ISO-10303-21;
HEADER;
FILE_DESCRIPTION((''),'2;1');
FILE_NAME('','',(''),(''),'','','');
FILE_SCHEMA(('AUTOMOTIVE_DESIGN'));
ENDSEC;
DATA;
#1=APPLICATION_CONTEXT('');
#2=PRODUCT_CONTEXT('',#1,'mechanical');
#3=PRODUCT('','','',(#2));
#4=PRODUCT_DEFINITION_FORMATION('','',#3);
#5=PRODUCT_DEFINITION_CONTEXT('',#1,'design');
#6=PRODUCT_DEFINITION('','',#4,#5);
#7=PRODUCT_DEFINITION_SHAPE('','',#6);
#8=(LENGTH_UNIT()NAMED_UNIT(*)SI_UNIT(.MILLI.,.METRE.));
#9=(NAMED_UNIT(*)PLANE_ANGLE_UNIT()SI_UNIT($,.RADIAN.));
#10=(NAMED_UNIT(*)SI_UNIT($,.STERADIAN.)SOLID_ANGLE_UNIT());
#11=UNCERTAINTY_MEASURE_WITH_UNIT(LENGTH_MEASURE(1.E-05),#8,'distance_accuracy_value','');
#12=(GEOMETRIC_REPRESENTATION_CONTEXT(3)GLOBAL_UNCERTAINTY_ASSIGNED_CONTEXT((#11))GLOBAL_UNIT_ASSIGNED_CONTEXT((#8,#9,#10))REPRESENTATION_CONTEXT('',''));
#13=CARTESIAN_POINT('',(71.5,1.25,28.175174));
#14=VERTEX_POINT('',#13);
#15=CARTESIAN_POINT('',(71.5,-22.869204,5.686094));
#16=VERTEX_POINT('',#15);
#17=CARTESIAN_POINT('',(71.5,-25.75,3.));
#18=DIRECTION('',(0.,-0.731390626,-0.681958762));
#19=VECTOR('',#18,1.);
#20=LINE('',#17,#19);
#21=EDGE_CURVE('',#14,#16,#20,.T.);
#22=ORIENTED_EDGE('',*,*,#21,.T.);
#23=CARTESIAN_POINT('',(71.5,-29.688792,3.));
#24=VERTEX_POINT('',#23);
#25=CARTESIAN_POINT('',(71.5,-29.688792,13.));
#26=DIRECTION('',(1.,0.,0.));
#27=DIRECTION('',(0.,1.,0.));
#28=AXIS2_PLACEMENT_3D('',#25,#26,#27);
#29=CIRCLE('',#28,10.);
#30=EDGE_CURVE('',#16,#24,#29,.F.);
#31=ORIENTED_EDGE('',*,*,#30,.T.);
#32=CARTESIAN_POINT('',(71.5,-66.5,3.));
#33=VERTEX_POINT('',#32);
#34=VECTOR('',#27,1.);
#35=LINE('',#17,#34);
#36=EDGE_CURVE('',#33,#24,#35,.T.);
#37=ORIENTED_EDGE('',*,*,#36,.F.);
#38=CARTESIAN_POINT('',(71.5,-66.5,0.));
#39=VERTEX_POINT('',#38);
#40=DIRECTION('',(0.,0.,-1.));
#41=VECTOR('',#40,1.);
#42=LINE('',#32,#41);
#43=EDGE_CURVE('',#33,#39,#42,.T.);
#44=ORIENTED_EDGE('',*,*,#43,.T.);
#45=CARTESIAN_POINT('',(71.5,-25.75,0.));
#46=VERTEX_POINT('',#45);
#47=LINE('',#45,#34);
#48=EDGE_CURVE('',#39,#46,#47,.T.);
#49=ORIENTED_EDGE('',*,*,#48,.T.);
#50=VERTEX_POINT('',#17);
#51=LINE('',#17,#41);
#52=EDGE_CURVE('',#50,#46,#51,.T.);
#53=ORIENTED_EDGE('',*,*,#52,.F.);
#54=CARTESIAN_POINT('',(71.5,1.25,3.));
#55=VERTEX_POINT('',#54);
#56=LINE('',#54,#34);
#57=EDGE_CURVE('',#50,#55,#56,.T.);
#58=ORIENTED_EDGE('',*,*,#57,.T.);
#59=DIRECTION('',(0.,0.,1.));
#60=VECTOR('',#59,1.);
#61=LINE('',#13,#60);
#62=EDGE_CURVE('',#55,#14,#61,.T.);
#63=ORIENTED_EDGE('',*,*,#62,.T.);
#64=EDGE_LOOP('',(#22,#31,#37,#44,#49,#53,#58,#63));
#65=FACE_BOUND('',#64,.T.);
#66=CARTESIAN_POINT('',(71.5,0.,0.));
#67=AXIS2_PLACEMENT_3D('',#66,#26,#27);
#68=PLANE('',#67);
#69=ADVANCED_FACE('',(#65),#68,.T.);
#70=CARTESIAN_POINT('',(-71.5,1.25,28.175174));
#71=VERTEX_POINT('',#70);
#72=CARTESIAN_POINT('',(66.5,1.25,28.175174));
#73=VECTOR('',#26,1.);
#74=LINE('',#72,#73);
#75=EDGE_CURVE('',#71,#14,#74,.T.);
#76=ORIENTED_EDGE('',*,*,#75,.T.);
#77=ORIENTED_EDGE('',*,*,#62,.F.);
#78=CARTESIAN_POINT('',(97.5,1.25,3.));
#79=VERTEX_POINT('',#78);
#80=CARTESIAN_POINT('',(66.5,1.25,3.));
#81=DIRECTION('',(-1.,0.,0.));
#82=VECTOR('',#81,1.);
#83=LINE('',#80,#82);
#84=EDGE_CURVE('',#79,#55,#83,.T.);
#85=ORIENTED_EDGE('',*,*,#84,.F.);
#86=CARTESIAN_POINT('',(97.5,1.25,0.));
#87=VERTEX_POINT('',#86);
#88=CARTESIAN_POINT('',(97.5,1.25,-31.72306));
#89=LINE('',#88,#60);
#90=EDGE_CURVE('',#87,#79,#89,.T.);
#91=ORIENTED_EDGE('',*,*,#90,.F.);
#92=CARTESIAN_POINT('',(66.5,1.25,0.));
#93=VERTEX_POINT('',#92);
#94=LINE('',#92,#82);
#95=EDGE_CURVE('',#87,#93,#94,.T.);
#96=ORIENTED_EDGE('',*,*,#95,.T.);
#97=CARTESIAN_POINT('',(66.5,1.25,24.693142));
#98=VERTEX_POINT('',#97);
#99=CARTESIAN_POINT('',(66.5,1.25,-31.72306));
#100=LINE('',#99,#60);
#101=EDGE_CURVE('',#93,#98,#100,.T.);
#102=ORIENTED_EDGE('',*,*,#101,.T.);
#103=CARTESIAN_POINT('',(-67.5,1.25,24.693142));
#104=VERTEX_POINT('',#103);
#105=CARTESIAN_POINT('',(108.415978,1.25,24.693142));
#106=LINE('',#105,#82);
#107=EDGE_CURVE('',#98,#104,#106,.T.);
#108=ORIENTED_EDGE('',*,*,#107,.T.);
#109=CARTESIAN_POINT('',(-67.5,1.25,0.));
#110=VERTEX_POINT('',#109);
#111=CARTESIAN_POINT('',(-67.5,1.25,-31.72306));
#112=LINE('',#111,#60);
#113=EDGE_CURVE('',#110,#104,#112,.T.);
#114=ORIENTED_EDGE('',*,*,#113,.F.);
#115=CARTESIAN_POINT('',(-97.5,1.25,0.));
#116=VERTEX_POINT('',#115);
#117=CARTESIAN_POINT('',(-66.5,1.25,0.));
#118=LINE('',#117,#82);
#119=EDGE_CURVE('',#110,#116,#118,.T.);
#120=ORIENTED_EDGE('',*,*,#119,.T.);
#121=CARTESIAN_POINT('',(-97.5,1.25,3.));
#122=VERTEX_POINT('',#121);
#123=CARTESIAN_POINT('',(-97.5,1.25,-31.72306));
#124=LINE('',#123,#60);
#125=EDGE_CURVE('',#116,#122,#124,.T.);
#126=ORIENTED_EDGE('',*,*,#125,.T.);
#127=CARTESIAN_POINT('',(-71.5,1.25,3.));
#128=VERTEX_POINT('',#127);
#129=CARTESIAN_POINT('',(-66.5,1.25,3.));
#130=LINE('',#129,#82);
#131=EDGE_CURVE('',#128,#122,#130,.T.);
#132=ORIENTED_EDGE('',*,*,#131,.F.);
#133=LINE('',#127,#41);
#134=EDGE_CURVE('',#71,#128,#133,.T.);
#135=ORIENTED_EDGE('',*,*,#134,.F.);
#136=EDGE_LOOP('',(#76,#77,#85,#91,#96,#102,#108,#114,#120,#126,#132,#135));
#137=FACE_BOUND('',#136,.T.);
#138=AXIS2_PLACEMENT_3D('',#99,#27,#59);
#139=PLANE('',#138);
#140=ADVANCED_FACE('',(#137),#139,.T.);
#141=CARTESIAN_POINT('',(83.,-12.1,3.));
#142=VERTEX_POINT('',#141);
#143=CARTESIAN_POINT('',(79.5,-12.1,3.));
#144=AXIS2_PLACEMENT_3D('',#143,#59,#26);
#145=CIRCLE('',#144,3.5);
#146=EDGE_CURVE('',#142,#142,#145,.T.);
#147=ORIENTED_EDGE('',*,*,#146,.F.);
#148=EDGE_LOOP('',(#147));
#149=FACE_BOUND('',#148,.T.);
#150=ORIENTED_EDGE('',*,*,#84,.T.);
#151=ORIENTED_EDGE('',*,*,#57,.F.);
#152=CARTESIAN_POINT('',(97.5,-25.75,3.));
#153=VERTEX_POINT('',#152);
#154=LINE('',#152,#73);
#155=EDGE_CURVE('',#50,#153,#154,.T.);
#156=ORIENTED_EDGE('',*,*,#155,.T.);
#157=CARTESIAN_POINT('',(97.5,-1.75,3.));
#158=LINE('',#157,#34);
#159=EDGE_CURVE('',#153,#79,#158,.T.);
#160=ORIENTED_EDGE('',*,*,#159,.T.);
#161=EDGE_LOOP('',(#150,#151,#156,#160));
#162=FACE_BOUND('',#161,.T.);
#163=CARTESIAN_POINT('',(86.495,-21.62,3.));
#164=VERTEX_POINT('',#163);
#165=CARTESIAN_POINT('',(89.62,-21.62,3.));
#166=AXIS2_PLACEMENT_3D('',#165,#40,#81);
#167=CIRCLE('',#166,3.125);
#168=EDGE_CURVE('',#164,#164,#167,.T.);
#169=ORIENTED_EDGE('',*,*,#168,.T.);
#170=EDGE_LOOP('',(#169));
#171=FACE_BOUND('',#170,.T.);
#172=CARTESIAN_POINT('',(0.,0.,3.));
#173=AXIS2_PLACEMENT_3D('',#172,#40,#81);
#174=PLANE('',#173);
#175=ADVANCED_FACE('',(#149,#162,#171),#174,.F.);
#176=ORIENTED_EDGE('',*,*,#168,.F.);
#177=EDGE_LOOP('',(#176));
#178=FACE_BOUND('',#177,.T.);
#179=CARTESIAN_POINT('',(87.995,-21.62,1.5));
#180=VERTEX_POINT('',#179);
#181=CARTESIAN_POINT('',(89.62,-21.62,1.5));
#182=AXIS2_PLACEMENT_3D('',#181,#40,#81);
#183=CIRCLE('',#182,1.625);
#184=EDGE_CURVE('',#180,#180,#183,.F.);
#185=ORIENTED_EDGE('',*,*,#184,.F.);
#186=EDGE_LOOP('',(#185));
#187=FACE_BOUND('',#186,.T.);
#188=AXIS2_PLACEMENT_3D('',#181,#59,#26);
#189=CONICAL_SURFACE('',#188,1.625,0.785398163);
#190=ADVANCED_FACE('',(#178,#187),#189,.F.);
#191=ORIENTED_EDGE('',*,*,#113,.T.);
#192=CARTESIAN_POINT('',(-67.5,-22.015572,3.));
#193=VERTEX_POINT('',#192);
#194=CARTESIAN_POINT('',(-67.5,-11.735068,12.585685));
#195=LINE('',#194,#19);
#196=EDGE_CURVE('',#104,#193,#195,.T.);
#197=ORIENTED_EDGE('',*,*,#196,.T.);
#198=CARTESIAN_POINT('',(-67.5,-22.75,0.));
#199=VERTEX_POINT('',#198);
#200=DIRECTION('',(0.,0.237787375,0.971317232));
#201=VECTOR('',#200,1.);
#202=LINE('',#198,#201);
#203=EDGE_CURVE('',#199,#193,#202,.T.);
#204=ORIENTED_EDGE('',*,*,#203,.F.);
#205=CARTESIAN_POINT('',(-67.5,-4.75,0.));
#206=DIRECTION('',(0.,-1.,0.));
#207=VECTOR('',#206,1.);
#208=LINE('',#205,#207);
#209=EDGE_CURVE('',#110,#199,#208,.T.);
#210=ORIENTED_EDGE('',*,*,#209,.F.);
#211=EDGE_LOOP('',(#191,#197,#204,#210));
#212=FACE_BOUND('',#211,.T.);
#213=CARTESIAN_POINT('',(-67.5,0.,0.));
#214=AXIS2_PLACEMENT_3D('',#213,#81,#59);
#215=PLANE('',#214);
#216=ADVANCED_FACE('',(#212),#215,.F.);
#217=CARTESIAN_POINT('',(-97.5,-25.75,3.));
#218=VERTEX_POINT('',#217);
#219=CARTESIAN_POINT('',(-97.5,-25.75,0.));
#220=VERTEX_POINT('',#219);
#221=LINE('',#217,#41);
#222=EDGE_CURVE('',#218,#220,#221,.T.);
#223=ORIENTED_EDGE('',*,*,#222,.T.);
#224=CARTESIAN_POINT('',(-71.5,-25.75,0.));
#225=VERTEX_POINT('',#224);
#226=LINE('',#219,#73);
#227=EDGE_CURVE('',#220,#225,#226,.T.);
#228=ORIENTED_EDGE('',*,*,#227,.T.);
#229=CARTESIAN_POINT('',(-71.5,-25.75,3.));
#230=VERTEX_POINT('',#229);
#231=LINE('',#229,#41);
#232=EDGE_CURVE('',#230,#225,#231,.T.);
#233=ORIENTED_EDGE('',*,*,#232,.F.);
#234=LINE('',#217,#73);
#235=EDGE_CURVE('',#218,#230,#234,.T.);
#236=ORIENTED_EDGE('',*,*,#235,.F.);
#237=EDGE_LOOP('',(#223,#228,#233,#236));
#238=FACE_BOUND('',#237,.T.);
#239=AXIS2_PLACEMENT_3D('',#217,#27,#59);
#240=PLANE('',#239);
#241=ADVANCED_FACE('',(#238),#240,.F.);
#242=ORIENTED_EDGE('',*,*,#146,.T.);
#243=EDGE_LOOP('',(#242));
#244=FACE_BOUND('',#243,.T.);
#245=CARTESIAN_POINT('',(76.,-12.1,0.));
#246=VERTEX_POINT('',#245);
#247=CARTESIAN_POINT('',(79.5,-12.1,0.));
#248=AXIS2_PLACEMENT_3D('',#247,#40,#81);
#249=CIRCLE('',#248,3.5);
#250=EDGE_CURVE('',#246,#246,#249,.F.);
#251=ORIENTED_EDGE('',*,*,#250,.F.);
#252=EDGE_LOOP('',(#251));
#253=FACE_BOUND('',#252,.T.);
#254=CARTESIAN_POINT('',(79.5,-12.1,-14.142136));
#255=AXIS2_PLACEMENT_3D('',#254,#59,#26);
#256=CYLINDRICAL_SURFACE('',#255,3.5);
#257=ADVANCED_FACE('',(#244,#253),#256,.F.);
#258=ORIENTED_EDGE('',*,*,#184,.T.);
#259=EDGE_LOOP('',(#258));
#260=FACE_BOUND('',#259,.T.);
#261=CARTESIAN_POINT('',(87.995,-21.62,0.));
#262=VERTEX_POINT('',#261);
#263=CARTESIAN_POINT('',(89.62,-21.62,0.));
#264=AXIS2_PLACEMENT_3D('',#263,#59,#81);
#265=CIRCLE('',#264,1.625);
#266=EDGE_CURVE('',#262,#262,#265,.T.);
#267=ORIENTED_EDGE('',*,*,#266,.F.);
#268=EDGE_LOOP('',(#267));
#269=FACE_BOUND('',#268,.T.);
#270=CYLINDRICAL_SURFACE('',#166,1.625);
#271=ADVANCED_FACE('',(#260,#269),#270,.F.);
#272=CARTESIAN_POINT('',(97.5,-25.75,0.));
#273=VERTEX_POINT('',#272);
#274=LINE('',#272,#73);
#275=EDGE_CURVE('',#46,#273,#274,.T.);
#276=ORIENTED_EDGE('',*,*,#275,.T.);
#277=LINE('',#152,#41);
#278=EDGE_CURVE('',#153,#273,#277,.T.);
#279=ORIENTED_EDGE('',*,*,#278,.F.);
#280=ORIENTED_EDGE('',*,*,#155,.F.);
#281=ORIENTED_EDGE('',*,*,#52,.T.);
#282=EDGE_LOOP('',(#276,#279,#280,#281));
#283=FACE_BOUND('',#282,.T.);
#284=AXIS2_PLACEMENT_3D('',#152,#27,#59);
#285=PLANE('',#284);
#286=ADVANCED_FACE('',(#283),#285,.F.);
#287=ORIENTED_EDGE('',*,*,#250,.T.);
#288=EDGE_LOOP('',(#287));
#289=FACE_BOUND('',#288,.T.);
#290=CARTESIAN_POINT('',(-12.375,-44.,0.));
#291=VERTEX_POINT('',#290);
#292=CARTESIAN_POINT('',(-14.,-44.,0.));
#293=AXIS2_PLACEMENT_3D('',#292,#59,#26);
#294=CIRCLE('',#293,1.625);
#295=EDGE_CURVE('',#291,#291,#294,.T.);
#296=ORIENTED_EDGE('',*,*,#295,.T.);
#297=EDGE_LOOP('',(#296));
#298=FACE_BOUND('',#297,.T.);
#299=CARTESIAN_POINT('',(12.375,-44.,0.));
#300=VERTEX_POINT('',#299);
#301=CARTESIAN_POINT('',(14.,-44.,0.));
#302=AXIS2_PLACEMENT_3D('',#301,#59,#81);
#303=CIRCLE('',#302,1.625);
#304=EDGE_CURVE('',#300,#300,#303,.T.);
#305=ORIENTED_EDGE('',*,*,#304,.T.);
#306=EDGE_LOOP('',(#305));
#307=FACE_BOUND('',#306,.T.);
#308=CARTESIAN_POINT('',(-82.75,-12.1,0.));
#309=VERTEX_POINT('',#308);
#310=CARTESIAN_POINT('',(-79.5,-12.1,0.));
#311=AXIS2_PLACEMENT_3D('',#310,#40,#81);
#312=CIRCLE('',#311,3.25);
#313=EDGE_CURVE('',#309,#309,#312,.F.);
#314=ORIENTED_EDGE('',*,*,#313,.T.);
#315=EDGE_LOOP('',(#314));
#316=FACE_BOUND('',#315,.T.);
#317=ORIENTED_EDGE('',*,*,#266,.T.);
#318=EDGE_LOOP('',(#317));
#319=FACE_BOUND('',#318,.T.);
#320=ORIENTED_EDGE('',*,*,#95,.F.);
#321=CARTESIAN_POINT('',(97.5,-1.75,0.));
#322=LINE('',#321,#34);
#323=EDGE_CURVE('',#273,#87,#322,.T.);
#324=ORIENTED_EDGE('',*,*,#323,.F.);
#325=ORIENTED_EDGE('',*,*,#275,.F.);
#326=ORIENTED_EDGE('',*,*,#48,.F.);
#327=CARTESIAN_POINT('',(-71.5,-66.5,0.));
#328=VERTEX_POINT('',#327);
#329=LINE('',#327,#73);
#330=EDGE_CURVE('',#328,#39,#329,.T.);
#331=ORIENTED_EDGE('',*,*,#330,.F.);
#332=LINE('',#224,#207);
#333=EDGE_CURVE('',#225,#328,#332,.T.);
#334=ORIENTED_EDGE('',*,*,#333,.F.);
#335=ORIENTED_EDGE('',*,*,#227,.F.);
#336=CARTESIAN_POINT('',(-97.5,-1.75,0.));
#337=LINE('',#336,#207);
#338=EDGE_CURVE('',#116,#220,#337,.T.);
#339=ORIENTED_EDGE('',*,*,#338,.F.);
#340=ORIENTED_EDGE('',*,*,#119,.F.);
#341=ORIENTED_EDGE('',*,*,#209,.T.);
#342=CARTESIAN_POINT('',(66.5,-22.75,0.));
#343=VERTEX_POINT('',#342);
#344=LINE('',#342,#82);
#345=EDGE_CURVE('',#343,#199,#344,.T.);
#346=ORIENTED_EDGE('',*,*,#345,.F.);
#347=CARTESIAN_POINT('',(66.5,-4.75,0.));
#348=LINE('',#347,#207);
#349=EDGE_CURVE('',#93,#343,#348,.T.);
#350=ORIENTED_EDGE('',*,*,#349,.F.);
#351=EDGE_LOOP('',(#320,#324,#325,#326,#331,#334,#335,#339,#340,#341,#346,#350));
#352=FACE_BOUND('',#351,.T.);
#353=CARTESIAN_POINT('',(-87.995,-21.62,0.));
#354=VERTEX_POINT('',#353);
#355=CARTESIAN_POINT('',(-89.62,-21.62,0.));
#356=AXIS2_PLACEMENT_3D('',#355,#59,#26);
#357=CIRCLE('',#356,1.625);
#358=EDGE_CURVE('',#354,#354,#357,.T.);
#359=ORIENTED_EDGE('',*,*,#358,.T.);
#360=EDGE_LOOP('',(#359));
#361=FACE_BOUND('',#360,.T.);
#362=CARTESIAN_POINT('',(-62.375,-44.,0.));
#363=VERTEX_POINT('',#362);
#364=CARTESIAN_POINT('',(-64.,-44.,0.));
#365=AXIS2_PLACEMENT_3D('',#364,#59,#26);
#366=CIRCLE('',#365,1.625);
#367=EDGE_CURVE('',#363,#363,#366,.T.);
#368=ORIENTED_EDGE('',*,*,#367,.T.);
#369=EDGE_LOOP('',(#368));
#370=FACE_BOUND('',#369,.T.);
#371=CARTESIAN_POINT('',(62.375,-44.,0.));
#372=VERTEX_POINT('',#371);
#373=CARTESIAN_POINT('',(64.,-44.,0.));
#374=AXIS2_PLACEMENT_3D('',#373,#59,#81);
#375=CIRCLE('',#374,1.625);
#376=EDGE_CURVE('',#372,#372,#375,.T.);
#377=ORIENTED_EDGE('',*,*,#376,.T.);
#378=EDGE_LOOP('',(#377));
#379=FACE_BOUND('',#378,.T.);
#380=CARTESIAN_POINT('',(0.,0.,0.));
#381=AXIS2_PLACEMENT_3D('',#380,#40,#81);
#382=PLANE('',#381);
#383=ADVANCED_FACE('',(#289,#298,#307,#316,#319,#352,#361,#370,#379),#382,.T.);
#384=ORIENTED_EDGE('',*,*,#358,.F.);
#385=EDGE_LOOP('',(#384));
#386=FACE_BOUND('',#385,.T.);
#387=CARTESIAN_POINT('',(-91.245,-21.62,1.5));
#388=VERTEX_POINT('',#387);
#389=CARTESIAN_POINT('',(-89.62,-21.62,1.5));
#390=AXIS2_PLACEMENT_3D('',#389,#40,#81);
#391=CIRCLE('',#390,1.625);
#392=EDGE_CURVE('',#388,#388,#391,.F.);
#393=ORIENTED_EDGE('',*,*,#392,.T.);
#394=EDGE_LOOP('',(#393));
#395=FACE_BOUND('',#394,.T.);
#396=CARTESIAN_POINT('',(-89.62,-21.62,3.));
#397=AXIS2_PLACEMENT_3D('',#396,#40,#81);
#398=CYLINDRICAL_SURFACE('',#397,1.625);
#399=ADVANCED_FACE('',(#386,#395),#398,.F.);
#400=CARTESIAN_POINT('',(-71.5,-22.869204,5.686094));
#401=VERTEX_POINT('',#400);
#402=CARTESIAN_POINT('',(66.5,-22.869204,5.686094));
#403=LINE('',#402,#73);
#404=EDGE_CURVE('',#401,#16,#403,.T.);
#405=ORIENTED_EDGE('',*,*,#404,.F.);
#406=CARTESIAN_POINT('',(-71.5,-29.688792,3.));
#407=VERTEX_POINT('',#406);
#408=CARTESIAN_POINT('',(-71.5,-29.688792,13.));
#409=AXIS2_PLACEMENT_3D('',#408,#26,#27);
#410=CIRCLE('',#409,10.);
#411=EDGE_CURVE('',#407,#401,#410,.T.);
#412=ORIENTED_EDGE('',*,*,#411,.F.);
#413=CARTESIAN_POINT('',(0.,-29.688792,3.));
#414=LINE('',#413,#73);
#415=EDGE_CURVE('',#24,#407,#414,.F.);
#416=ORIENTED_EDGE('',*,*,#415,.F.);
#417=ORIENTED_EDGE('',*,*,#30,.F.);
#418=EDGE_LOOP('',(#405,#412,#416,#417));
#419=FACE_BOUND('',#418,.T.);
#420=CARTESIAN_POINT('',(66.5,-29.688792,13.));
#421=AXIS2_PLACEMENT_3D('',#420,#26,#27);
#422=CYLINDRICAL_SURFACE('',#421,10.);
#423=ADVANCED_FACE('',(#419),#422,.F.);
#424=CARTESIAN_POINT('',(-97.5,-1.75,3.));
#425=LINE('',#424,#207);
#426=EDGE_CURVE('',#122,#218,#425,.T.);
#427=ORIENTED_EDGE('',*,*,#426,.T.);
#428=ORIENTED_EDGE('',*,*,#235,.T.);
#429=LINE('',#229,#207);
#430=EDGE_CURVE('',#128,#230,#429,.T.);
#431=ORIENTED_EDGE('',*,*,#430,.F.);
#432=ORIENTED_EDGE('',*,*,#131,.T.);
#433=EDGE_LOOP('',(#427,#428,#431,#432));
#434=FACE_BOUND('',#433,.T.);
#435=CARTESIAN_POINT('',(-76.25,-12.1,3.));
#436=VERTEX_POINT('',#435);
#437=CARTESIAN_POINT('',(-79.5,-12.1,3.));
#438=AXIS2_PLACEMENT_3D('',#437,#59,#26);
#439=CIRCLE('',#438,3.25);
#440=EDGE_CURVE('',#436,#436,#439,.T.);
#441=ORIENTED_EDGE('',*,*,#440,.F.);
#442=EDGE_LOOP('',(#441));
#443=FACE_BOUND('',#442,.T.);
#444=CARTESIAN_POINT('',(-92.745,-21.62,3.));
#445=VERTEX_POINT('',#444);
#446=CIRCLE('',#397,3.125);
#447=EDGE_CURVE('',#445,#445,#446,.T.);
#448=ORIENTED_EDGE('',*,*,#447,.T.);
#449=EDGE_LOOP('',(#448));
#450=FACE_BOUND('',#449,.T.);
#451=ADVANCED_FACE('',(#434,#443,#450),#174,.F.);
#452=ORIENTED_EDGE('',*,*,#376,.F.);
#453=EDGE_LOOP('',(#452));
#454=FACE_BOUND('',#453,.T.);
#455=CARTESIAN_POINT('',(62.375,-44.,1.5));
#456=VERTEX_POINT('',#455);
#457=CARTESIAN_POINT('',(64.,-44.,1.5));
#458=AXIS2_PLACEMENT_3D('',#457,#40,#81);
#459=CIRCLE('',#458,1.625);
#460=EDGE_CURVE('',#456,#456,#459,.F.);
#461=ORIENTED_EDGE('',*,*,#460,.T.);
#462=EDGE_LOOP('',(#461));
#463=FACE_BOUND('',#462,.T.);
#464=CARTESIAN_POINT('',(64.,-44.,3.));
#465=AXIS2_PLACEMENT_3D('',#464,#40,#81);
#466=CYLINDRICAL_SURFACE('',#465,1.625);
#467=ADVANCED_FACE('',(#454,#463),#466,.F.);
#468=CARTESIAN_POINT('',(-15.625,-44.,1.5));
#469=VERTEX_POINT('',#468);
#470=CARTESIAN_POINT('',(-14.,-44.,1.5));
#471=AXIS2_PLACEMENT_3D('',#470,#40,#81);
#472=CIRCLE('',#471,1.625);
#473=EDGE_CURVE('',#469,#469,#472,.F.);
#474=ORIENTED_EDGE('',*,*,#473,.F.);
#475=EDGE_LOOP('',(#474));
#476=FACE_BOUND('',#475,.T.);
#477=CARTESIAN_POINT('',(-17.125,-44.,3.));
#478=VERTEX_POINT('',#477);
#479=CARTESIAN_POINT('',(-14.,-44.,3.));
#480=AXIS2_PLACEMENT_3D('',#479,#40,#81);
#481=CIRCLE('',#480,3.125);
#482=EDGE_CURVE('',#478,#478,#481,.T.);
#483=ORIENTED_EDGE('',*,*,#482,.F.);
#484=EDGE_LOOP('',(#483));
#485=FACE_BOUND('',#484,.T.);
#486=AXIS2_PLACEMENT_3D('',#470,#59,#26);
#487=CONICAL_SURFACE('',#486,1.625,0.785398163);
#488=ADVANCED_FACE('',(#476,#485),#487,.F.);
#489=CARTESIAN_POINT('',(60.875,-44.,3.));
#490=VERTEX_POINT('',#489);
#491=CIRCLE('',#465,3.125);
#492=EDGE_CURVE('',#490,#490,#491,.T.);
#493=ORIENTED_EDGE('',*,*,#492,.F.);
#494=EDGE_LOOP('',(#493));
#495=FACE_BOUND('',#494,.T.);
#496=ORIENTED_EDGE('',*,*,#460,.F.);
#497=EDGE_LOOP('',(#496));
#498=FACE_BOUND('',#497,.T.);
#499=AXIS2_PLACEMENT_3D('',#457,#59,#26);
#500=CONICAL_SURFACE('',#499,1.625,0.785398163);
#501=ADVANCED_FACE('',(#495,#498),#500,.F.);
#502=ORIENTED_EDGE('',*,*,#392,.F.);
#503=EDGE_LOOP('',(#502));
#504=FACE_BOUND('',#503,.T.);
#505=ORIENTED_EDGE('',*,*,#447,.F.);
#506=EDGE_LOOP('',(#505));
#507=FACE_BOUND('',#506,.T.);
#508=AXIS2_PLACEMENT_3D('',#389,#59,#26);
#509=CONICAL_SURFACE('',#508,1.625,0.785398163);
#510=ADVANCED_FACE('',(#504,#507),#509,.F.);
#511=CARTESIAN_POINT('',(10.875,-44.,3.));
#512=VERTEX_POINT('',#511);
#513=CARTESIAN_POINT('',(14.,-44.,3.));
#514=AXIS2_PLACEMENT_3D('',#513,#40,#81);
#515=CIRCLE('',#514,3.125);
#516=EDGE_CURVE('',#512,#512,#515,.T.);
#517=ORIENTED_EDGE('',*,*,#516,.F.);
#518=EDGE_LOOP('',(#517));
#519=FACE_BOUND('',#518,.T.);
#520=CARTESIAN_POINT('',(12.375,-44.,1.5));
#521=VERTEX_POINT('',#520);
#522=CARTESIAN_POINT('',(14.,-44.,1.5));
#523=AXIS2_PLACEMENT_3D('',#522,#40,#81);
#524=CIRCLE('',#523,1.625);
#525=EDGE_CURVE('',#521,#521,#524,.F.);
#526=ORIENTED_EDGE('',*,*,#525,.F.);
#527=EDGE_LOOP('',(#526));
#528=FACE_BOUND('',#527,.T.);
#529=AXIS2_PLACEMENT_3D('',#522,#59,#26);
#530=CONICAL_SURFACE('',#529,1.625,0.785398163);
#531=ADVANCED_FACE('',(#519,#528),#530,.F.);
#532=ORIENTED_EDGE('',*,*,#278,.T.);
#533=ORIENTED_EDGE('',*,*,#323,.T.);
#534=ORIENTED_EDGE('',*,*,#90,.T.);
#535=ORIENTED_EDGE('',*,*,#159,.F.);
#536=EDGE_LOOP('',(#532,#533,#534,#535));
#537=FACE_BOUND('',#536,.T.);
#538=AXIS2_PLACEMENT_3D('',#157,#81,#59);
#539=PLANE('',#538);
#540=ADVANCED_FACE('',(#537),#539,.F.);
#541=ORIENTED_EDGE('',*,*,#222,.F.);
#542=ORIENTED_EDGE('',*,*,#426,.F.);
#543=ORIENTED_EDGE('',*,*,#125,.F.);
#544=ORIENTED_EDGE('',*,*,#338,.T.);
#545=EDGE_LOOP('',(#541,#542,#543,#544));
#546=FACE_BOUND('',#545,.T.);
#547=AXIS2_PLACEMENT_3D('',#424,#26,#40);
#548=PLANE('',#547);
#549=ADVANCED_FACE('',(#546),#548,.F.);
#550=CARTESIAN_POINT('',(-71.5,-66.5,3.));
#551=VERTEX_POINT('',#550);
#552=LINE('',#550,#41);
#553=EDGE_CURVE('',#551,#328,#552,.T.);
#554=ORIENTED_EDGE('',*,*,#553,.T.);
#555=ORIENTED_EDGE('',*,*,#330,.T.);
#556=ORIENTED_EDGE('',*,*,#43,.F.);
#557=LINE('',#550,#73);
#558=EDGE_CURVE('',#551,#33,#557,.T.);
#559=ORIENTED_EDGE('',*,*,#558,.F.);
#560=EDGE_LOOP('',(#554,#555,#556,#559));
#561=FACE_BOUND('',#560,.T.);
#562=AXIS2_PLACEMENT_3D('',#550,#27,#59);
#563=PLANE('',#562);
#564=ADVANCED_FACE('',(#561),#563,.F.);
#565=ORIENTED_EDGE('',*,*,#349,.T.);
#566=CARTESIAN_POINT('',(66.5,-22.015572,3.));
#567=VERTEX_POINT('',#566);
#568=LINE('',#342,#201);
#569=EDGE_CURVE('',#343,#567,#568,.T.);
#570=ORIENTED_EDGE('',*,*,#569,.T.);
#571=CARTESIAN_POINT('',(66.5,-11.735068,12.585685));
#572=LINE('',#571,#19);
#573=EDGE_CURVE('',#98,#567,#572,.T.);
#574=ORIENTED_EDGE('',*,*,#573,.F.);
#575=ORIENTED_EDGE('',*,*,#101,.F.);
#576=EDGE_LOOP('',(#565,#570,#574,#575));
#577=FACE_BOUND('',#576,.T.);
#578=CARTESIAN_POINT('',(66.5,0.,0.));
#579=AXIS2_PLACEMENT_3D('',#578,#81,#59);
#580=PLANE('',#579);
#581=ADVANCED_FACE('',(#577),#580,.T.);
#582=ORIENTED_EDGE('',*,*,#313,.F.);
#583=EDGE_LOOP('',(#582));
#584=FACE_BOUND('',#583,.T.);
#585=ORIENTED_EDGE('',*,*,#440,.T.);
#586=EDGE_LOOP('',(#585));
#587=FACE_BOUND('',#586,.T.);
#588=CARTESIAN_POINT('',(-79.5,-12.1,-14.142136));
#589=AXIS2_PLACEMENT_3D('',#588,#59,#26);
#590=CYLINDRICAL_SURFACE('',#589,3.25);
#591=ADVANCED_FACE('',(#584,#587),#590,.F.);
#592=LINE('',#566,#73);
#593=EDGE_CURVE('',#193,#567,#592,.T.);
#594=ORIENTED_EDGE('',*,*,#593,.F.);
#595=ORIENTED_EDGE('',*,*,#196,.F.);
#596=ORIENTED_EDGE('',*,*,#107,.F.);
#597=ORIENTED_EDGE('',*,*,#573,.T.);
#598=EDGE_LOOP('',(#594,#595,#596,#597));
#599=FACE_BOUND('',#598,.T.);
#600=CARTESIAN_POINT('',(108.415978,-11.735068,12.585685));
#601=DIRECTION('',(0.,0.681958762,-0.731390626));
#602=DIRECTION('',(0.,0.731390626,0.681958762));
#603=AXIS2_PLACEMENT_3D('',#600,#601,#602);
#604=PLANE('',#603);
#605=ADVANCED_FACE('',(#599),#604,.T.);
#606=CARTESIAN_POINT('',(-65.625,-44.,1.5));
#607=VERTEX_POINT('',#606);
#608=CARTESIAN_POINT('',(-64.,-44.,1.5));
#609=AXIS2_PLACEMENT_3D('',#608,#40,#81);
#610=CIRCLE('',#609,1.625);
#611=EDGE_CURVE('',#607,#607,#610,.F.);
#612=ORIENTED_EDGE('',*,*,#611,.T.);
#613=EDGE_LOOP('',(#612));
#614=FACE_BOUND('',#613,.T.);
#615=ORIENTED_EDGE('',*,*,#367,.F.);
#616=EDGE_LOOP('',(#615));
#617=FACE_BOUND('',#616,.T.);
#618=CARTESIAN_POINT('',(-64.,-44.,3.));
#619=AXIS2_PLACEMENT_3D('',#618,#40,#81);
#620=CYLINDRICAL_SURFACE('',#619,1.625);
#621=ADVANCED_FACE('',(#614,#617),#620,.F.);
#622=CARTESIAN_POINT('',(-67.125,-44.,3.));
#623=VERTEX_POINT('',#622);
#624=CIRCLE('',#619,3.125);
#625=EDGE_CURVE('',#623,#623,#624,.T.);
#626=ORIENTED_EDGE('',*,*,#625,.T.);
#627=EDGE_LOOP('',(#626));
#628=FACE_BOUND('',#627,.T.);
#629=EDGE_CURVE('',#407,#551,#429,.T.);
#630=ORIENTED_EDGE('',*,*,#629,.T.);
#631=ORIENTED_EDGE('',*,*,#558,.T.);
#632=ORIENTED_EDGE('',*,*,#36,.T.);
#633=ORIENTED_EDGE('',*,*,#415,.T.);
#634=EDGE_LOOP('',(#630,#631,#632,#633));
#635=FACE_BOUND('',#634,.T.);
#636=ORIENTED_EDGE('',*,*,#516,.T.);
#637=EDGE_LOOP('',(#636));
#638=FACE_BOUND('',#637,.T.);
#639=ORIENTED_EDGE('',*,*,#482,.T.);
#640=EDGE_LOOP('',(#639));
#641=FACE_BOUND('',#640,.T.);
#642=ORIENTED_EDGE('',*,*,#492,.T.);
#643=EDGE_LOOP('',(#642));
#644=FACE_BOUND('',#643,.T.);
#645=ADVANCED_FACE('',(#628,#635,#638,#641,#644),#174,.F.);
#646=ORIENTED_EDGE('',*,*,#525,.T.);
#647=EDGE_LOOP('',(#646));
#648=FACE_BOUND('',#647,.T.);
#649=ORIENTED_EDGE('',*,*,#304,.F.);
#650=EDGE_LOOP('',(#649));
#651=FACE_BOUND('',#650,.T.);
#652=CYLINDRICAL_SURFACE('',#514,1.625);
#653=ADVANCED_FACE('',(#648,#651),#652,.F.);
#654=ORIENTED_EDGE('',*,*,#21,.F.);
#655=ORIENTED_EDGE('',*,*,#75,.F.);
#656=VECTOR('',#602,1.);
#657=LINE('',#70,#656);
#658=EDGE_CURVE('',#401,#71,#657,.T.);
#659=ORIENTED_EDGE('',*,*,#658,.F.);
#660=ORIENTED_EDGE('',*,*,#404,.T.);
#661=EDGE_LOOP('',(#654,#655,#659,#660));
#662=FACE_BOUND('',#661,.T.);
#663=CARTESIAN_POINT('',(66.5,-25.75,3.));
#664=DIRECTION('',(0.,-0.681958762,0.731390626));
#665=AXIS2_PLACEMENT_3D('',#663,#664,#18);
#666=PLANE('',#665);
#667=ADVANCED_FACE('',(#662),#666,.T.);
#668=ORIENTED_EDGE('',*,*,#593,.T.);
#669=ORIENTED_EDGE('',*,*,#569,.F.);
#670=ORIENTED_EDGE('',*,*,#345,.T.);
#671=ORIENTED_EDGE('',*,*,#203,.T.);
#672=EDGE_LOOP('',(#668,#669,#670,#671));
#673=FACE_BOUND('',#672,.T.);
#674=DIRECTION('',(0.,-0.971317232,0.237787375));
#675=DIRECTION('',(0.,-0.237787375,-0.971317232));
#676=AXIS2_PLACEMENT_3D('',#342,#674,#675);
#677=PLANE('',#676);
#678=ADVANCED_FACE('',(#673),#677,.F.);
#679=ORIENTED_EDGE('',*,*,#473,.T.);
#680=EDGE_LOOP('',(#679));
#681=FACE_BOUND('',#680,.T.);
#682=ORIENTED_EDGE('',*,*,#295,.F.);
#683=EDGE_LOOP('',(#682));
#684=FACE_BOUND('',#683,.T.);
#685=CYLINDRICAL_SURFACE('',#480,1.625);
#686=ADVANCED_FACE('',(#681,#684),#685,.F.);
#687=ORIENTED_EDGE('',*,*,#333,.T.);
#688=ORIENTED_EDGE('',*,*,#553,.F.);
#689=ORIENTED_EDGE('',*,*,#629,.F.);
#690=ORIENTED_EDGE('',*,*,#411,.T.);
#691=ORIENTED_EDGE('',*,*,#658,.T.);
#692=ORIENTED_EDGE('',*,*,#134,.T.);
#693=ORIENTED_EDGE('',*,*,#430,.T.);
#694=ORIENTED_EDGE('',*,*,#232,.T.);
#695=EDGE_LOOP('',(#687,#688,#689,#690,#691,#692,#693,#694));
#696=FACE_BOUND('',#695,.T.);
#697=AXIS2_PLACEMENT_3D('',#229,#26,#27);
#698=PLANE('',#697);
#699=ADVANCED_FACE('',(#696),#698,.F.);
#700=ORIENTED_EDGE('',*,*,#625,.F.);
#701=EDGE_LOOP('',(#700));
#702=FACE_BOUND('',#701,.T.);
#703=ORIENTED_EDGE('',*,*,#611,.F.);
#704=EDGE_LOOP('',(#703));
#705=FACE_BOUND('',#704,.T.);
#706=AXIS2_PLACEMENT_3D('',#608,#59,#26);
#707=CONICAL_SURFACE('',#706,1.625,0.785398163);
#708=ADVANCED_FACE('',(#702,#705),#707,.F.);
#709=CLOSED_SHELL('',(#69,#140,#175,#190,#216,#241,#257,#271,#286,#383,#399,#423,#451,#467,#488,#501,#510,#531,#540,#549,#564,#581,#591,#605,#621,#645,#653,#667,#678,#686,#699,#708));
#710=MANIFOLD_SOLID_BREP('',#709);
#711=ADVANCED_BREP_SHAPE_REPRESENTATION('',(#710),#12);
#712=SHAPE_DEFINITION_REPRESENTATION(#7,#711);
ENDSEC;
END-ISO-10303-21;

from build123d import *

# Parameters (mm, degrees)
CROQUIS1_R                  = 1.625
SALIENTE_EXTRUIR1_DEPTH     = 3
CROQUIS2_W                  = 143
CROQUIS2_H                  = 24
SALIENTE_EXTRUIR2_DEPTH     = 13
CORTAR_EXTRUIR1_START       = -4
CORTAR_EXTRUIR1_DEPTH       = 134
CORTAR_EXTRUIR2_DEPTH       = 183.316345948
CORTAR_EXTRUIR2_DEPTH_BACK  = 183.316345948
SALIENTE_EXTRUIR3_DEPTH     = 1
CHAFL_N1_SIZE               = 1.5
CROQUIS7_R                  = 6
CORTAR_EXTRUIR3_DEPTH       = 10
CROQUIS11_R                 = 5
CORTAR_EXTRUIR7_DEPTH       = 60
CORTAR_EXTRUIR8_DEPTH       = 183.40682554
CORTAR_EXTRUIR8_DEPTH_BACK  = 183.40682554
CROQUIS12_W                 = 39.754544999
CROQUIS12_H                 = 27.919936099
CORTAR_EXTRUIR9_DEPTH       = 119.057189531
CORTAR_EXTRUIR9_DEPTH_BACK  = 119.057189531
CROQUIS13_W                 = 134.117881028
CROQUIS13_H                 = 3.734427539
CORTAR_EXTRUIR10_DEPTH      = 207.049144623
CORTAR_EXTRUIR10_DEPTH_BACK = 207.049144623
CROQUIS14_W                 = 4.069621889
CROQUIS14_H                 = 4.224509549
CROQUIS22_W                 = 31
CROQUIS22_H                 = 6.734427539
SALIENTE_EXTRUIR9_DEPTH     = 3
CROQUIS23_W                 = 15.138367264
CROQUIS23_H                 = 34.152206442
CORTAR_EXTRUIR11_DEPTH      = 10
SALIENTE_EXTRUIR4_START     = -5
SALIENTE_EXTRUIR4_DEPTH     = 5
SALIENTE_EXTRUIR5_START     = -4
SALIENTE_EXTRUIR5_DEPTH     = 4
SALIENTE_EXTRUIR6_START     = -138
SALIENTE_EXTRUIR6_DEPTH     = 134
CROQUIS18_R                 = 6
SALIENTE_EXTRUIR7_DEPTH     = 3
REDONDEO1_R                 = 10
CROQUIS19_R                 = 5
CROQUIS19_R_2               = 3.25
CROQUIS19_R_3               = 3.5
SALIENTE_EXTRUIR8_DEPTH     = 3


with BuildPart() as part:
    # Croquis1 → Saliente-Extruir1 (new body)
    with BuildSketch(Plane.XY):
        Polygon((-97.5, -1.75), (-97.5, -25.75), (-71.5, -25.75), (-71.5, -66.5), (71.5, -66.5), (71.5, -25.75), (97.5, -25.75), (97.5, -1.75), align=None)
        with Locations((-89.62, -21.62)):
            Circle(CROQUIS1_R, mode=Mode.SUBTRACT)
        with Locations((-64, -44)):
            Circle(CROQUIS1_R, mode=Mode.SUBTRACT)
        with Locations((-14, -44)):
            Circle(CROQUIS1_R, mode=Mode.SUBTRACT)
        with Locations(Location((14, -44, 0), (0, 0, 180))):
            Circle(CROQUIS1_R, mode=Mode.SUBTRACT)
        with Locations(Location((64, -44, 0), (0, 0, 180))):
            Circle(CROQUIS1_R, mode=Mode.SUBTRACT)
        with Locations(Location((89.62, -21.62, 0), (0, 0, 180))):
            Circle(CROQUIS1_R, mode=Mode.SUBTRACT)
    extrude(amount=SALIENTE_EXTRUIR1_DEPTH)

    # Croquis2 → Saliente-Extruir2 (add)
    with BuildSketch(Plane.XY.offset(3)):
        with Locations((0, -13.75)):
            Rectangle(CROQUIS2_W, CROQUIS2_H)
    extrude(amount=SALIENTE_EXTRUIR2_DEPTH)

    # Croquis4 → Cortar-Extruir1 (cut)
    with BuildSketch(Plane.ZY.offset(71.5).offset(CORTAR_EXTRUIR1_START)):
        Polygon((0, -22.75), (12.254442441, -19.75), (12.254442441, -7.75), (0, -4.75), align=None)
    extrude(amount=-CORTAR_EXTRUIR1_DEPTH, mode=Mode.SUBTRACT)

    # Croquis5 → Cortar-Extruir2 (cut, two sides: drawn at the far end of the back side and taken through both)
    with BuildSketch(Plane.ZY.offset(71.5).offset(-CORTAR_EXTRUIR2_DEPTH_BACK)):
        Polygon((3, -25.75), (16, -22.567480666), (16, -5.666946873), (0, -1.75), (13.126652557, 3.411104472), (22.490929508, -3.111277484), (22.490929508, -28.232984682), align=None)
    extrude(amount=CORTAR_EXTRUIR2_DEPTH + CORTAR_EXTRUIR2_DEPTH_BACK, mode=Mode.SUBTRACT)

    # Croquis6 → Saliente-Extruir3 (add)
    # profile 1 of 3: a face of its own
    with BuildSketch(Plane.XY.offset(16)):
        with BuildLine():
            Line((-11.048076923, -8.067480666), (-8.963942308, -8.067480666))
            add(Edge.make_bspline(
                [(-8.963942308, -8.067480666), (-8.809276988, -8.068112716), (-8.511063659, -8.069331385), (-8.082223191, -8.086660848), (-7.688620597, -8.112805667), (-7.330723888, -8.147308935), (-7.008234257, -8.195180289), (-6.72182234, -8.25265944), (-6.469658762, -8.316670483), (-6.318437154, -8.376153718), (-6.247596154, -8.404019127)],
                knots=[0, 0, 0, 0, 1.348808202, 2.600664361, 3.742342956, 4.788858012, 5.735658768, 6.584006912, 7.336666444, 8, 8, 8, 8], degree=3))
            add(Edge.make_bspline(
                [(-6.247596154, -8.404019127), (-6.167838297, -8.439986111), (-6.01192431, -8.510295871), (-5.788508653, -8.62947523), (-5.57929728, -8.757863745), (-5.387757493, -8.900302082), (-5.209847212, -9.050792623), (-5.046669639, -9.210766732), (-4.899538696, -9.382679515), (-4.766910273, -9.563447492), (-4.648977655, -9.752836862), (-4.547744652, -9.951781558), (-4.460210228, -10.158597262), (-4.391853098, -10.375534491), (-4.335040106, -10.599989157), (-4.298295523, -10.833377416), (-4.27243642, -11.07491201), (-4.270311593, -11.238882429), (-4.269230769, -11.322288358)],
                knots=[0, 0, 0, 0, 1.116361014, 2.182309107, 3.229450697, 4.24598407, 5.225421932, 6.201651319, 7.158895679, 8.110002388, 9.060669178, 10.002827475, 10.956240434, 11.923213192, 12.902917952, 13.908279153, 14.936015885, 16, 16, 16, 16], degree=3))
            add(Edge.make_bspline(
                [(-4.269230769, -11.322288358), (-4.271772595, -11.424925094), (-4.276790571, -11.627546629), (-4.309579081, -11.926339339), (-4.370733726, -12.213061963), (-4.453090589, -12.488617706), (-4.555124128, -12.754790758), (-4.686709728, -13.006949511), (-4.838806317, -13.249487522), (-5.014462356, -13.47922496), (-5.210800272, -13.698269295), (-5.437501776, -13.893729522), (-5.68202542, -14.078750894), (-5.954416581, -14.240928545), (-6.247183828, -14.39157714), (-6.567004768, -14.519215786), (-6.907876863, -14.637006555), (-7.14689016, -14.695959195), (-7.269230769, -14.726134512)],
                knots=[0, 0, 0, 0, 0.995453645, 1.965186658, 2.910129054, 3.83459069, 4.752398018, 5.669942118, 6.588407184, 7.525617038, 8.471772905, 9.435289717, 10.423772802, 11.441988612, 12.505459691, 13.613754905, 14.778583949, 16, 16, 16, 16], degree=3))
            Line((-7.269230769, -14.726134512), (-4.5, -20.067480666))
            Line((-4.5, -20.067480666), (-6.90625, -20.067480666))
            Line((-6.90625, -20.067480666), (-9.617788462, -14.836711435))
            Line((-9.617788462, -14.836711435), (-9.822115385, -14.836711435))
            Line((-9.822115385, -14.836711435), (-10.557692308, -20.067480666))
            Line((-10.557692308, -20.067480666), (-12.730769231, -20.067480666))
            Line((-12.730769231, -20.067480666), (-11.048076923, -8.067480666))
        make_face()
        with BuildLine():
            add(Edge.make_bspline(
                [(-9.540865385, -12.836711435), (-9.386195416, -12.835275241), (-9.090350679, -12.832528164), (-8.667825913, -12.813420248), (-8.28680605, -12.783236682), (-7.948389952, -12.740102395), (-7.651687406, -12.689090143), (-7.397958815, -12.625404989), (-7.186041205, -12.549684501), (-7.012592097, -12.459887562), (-6.872086372, -12.354457197), (-6.750472631, -12.241946473), (-6.649207312, -12.116003172), (-6.565654347, -11.978741621), (-6.5012127, -11.829877316), (-6.454740309, -11.668401722), (-6.429045355, -11.495391495), (-6.425095306, -11.376054994), (-6.423076923, -11.31507682)],
                knots=[0, 0, 0, 0, 1.892208387, 3.619318591, 5.173427176, 6.566868293, 7.791773198, 8.8545744, 9.763297566, 10.539470204, 11.233547833, 11.906251103, 12.5615143, 13.203742025, 13.866659999, 14.539934446, 15.25394049, 16, 16, 16, 16], degree=3))
            add(Edge.make_bspline(
                [(-6.423076923, -11.31507682), (-6.425689641, -11.245936375), (-6.430757957, -11.11181339), (-6.474596815, -10.918637614), (-6.549559753, -10.743400948), (-6.654909947, -10.587778732), (-6.786381326, -10.450558767), (-6.946769202, -10.337542298), (-7.134240875, -10.248576591), (-7.309857115, -10.189799645), (-7.476087089, -10.155754532), (-7.631045454, -10.132880777), (-7.814511833, -10.110808419), (-8.027038079, -10.094486606), (-8.26836871, -10.083690031), (-8.538380856, -10.073198835), (-8.836529796, -10.069468107), (-9.044872334, -10.068163199), (-9.153846154, -10.067480666)],
                knots=[0, 0, 0, 0, 0.974340854, 1.890087692, 2.776057671, 3.647490651, 4.526730822, 5.442477659, 6.397820337, 7.445016909, 8.045730266, 8.789007992, 9.653967296, 10.651691253, 11.794598421, 13.061237498, 14.462876682, 16, 16, 16, 16], degree=3))
            Line((-9.153846154, -10.067480666), (-9.540865385, -12.836711435))
        make_face(mode=Mode.SUBTRACT)
    # profile 2 of 3: a face of its own
    with BuildSketch(Plane.XY.offset(16)):
        Polygon((1.884615385, -8.067480666), (4.180288462, -8.067480666), (6.012019231, -12.807865281), (9.425480769, -8.067480666), (12.033653846, -8.067480666), (6.838942308, -15.28382682), (6.209134615, -20.067480666), (4.038461538, -20.067480666), (4.670673077, -15.271807589), align=None)
    # profile 3 of 3: a face of its own
    with BuildSketch(Plane.XY.offset(16)):
        with BuildLine():
            add(Edge.make_bspline(
                [(24.487980769, -7.759788358), (24.690145883, -7.764031221), (25.087091072, -7.772361955), (25.668927957, -7.849024893), (26.224011967, -7.972589701), (26.750990661, -8.149778703), (27.251887383, -8.373625801), (27.725496832, -8.64948879), (28.171301864, -8.975420649), (28.585672586, -9.347005104), (28.961013577, -9.756424421), (29.293862045, -10.194630861), (29.570289093, -10.663617643), (29.797934343, -11.158162459), (29.977385898, -11.67880605), (30.099797668, -12.228050386), (30.180599156, -12.802256134), (30.188356974, -13.194600078), (30.192307692, -13.394403743)],
                knots=[0, 0, 0, 0, 1.079937363, 2.120424901, 3.130164457, 4.114608815, 5.086352068, 6.057283592, 7.037967613, 8.032612779, 9.026667848, 10.002130715, 10.967845321, 11.92966918, 12.907375778, 13.904589319, 14.932898699, 16, 16, 16, 16], degree=3))
            add(Edge.make_bspline(
                [(30.192307692, -13.394403743), (30.189777514, -13.549969057), (30.184745184, -13.859376411), (30.136860197, -14.319433848), (30.062261858, -14.772962365), (29.960118985, -15.22009286), (29.823390606, -15.659391242), (29.660180669, -16.093460312), (29.46547734, -16.520524116), (29.241871054, -16.937274794), (28.996915489, -17.338803359), (28.7284292, -17.718478392), (28.439993147, -18.074046587), (28.132714318, -18.406907786), (27.803274713, -18.712605848), (27.458113362, -18.997544901), (27.089752961, -19.255248214), (26.704041226, -19.490638964), (26.300172025, -19.699838611), (25.880874397, -19.880651571), (25.446694054, -20.031827723), (24.998656183, -20.156810905), (24.535654153, -20.256242446), (24.057773688, -20.324929749), (23.564847151, -20.366615352), (23.231652765, -20.37229141), (23.0625, -20.375172973)],
                knots=[0, 0, 0, 0, 1.005311864, 1.999487392, 2.986390894, 3.975195422, 4.961487101, 5.958115224, 6.97104375, 7.992937587, 9.013623077, 10.009524137, 10.996414046, 11.971324635, 12.935123389, 13.899409138, 14.862205298, 15.838449601, 16.81836937, 17.799766407, 18.787539403, 19.787875373, 20.804768927, 21.846385261, 22.906674593, 24, 24, 24, 24], degree=3))
            add(Edge.make_bspline(
                [(23.0625, -20.375172973), (22.853135899, -20.370858389), (22.444328213, -20.362433662), (21.848518981, -20.288026789), (21.284795586, -20.171851994), (20.753132043, -20.005539058), (20.252537915, -19.791081257), (19.784665176, -19.527933243), (19.348368226, -19.218964103), (18.95096102, -18.86198382), (18.589596339, -18.470409943), (18.279289135, -18.040986521), (18.01132057, -17.585306791), (17.798725719, -17.095904155), (17.628612138, -16.578784265), (17.510091564, -16.030972392), (17.435973691, -15.453330543), (17.427441159, -15.058097005), (17.423076923, -14.855942204)],
                knots=[0, 0, 0, 0, 1.129126937, 2.20475128, 3.23403939, 4.230775744, 5.204839333, 6.16680792, 7.121629951, 8.083044708, 9.04383724, 9.990659777, 10.936010704, 11.890255174, 12.863608629, 13.868449271, 14.909750384, 16, 16, 16, 16], degree=3))
            add(Edge.make_bspline(
                [(17.423076923, -14.855942204), (17.428320242, -14.624869771), (17.438644619, -14.169875797), (17.52940159, -13.500129748), (17.668126056, -12.853643656), (17.872529982, -12.233852573), (18.130311731, -11.638404639), (18.447815919, -11.06928239), (18.820122992, -10.521870887), (19.110384087, -10.185000587), (19.257211538, -10.01459605)],
                knots=[0, 0, 0, 0, 1.045740506, 2.05911896, 3.05467723, 4.035585325, 5.008815224, 5.988058098, 6.982266978, 8, 8, 8, 8], degree=3))
            add(Edge.make_bspline(
                [(19.257211538, -10.01459605), (19.342684328, -9.922203908), (19.51209099, -9.739083119), (19.783215845, -9.484603753), (20.06097764, -9.246349173), (20.349308035, -9.027147767), (20.643852388, -8.821908403), (20.949304268, -8.637099729), (21.264508226, -8.470716347), (21.586036115, -8.318996359), (21.919420196, -8.189450626), (22.258897756, -8.073377572), (22.609179935, -7.977606464), (22.967797996, -7.898338686), (23.335095226, -7.835310389), (23.711559619, -7.793010431), (24.096550714, -7.765636615), (24.356523498, -7.761752428), (24.487980769, -7.759788358)],
                knots=[0, 0, 0, 0, 1.027812829, 2.037120149, 3.035266778, 4.015768311, 4.994345575, 5.966422343, 6.929711672, 7.904780536, 8.86860337, 9.849672715, 10.834163809, 11.833018336, 12.848777673, 13.876590502, 14.926281379, 16, 16, 16, 16], degree=3))
        make_face()
        with BuildLine():
            add(Edge.make_bspline(
                [(24.4375, -9.759788358), (24.328447387, -9.761418674), (24.111488075, -9.764662176), (23.790362866, -9.797280367), (23.475697903, -9.847819491), (23.168815306, -9.917080446), (22.868242731, -10.006469212), (22.576026578, -10.116936735), (22.290007834, -10.247670757), (22.013339819, -10.398523989), (21.745094417, -10.566746314), (21.490872977, -10.754485143), (21.248887858, -10.959052925), (21.023212093, -11.18405633), (20.808889976, -11.424872132), (20.606521464, -11.681986732), (20.418634071, -11.957904331), (20.244392114, -12.248035341), (20.089720762, -12.550000292), (19.952338208, -12.854508864), (19.835416748, -13.161604404), (19.742691091, -13.472121892), (19.666996063, -13.784816529), (19.614508511, -14.100512176), (19.581919, -14.418547712), (19.578590145, -14.63150578), (19.576923077, -14.738153743)],
                knots=[0, 0, 0, 0, 1.015557909, 2.02044445, 3.003357477, 3.982977463, 4.948851735, 5.922052592, 6.890662853, 7.875953625, 8.855459861, 9.837777552, 10.817397539, 11.804383193, 12.803598646, 13.818964529, 14.849984807, 15.911175445, 16.969421976, 18.008462528, 19.021851172, 20.027762868, 21.025304218, 22.016795393, 23.006824523, 24, 24, 24, 24], degree=3))
            add(Edge.make_bspline(
                [(19.576923077, -14.738153743), (19.579554921, -14.862493068), (19.584733218, -15.107137502), (19.62985602, -15.46726908), (19.699769416, -15.813989217), (19.805563564, -16.144424323), (19.934112881, -16.462147128), (20.097326515, -16.762409031), (20.284948891, -17.051147187), (20.503012874, -17.321027274), (20.746578093, -17.570198979), (21.021361871, -17.785169726), (21.320372429, -17.968728653), (21.644893978, -18.118096904), (21.994659132, -18.234678513), (22.370567325, -18.313898162), (22.770964471, -18.366393766), (23.046299029, -18.372196918), (23.1875, -18.375172973)],
                knots=[0, 0, 0, 0, 1.032572517, 2.031642993, 3.01079972, 3.966643664, 4.909863955, 5.853952978, 6.801111379, 7.766917104, 8.731873648, 9.689385086, 10.65752794, 11.640388645, 12.650815691, 13.713650281, 14.827481725, 16, 16, 16, 16], degree=3))
            add(Edge.make_bspline(
                [(23.1875, -18.375172973), (23.352788185, -18.371267675), (23.679167101, -18.363556252), (24.158560502, -18.294872985), (24.618756292, -18.180856063), (25.059793976, -18.025050504), (25.481815634, -17.823391072), (25.884831734, -17.577269923), (26.267802401, -17.284339207), (26.627646907, -16.95226102), (26.958207141, -16.589806943), (27.247161365, -16.20243939), (27.492552605, -15.795258336), (27.692480371, -15.369154171), (27.847171329, -14.923409671), (27.957444954, -14.458807988), (28.027034101, -13.975037009), (28.03462008, -13.645441832), (28.038461538, -13.478538358)],
                knots=[0, 0, 0, 0, 1.03369803, 2.041145535, 3.022357397, 3.995919545, 4.96236968, 5.943376615, 6.945032455, 7.973917545, 9.003120129, 10.009769043, 10.992465341, 11.972511115, 12.949140339, 13.93890809, 14.956285095, 16, 16, 16, 16], degree=3))
            add(Edge.make_bspline(
                [(28.038461538, -13.478538358), (28.036245406, -13.341360283), (28.031902288, -13.072522213), (27.981755136, -12.68105056), (27.905579854, -12.310002908), (27.798497608, -11.959493941), (27.654266016, -11.631495582), (27.485057282, -11.321970211), (27.280132488, -11.03616901), (27.047907563, -10.773147054), (26.79116339, -10.534153573), (26.511117013, -10.328091437), (26.213858009, -10.149180232), (25.894302371, -10.00960188), (25.558232415, -9.89383052), (25.201686968, -9.815996795), (24.825727742, -9.770032092), (24.569043318, -9.763259245), (24.4375, -9.759788358)],
                knots=[0, 0, 0, 0, 1.12845219, 2.211511647, 3.242392028, 4.243671568, 5.221368115, 6.186708094, 7.141970352, 8.109200861, 9.070590294, 10.022934043, 10.966237583, 11.91979086, 12.887493425, 13.887534174, 14.917422563, 16, 16, 16, 16], degree=3))
        make_face(mode=Mode.SUBTRACT)
    extrude(amount=SALIENTE_EXTRUIR3_DEPTH)

    # Chaflán1
    chafl_n1_edges = [part.edges().sort_by_distance(p)[0] for p in [
        (-91.245, -21.62, 3),
        (-65.625, -44, 3),
        (-15.625, -44, 3),
        (15.625, -44, 3),
        (65.625, -44, 3),
        (91.245, -21.62, 3),
    ]]
    chamfer(chafl_n1_edges, length=CHAFL_N1_SIZE)

    # Croquis7 → Cortar-Extruir3 (cut)
    with BuildSketch(Plane.XY.offset(3)):
        with Locations((0, -33.75)):
            Circle(CROQUIS7_R)
    extrude(amount=-CORTAR_EXTRUIR3_DEPTH, mode=Mode.SUBTRACT)

    # Croquis11 → Cortar-Extruir7 (cut)
    with BuildSketch(Plane.XY.offset(3)):
        with Locations((-79.5, -12.1)):
            Circle(CROQUIS11_R)
        with Locations(Location((79.5, -12.1, 0), (0, 0, 180))):
            Circle(CROQUIS11_R)
    extrude(amount=-CORTAR_EXTRUIR7_DEPTH, mode=Mode.SUBTRACT)

    # Croquis12 → Cortar-Extruir8 (cut, two sides: drawn at the far end of the back side and taken through both)
    with BuildSketch(Plane(origin=(71.5, 0, 0), x_dir=(0, 0, -1), z_dir=(1, 0, 0)).offset(-CORTAR_EXTRUIR8_DEPTH_BACK)):
        with Locations((-22.8772725, -11.79003195)):
            Rectangle(CROQUIS12_W, CROQUIS12_H)
    extrude(amount=CORTAR_EXTRUIR8_DEPTH + CORTAR_EXTRUIR8_DEPTH_BACK, mode=Mode.SUBTRACT)

    # Croquis13 → Cortar-Extruir9 (cut, two sides: drawn at the far end of the back side and taken through both)
    with BuildSketch(Plane.XY.offset(3).offset(-CORTAR_EXTRUIR9_DEPTH_BACK)):
        with Locations((-0.441059486, -3.61721377)):
            Rectangle(CROQUIS13_W, CROQUIS13_H)
    extrude(amount=CORTAR_EXTRUIR9_DEPTH + CORTAR_EXTRUIR9_DEPTH_BACK, mode=Mode.SUBTRACT)

    # Croquis14 → Cortar-Extruir10 (cut, two sides: drawn at the far end of the back side and taken through both)
    with BuildSketch(Plane(origin=(97.5, 0, 0), x_dir=(0, 0, -1), z_dir=(1, 0, 0)).offset(-CORTAR_EXTRUIR10_DEPTH_BACK)):
        with Locations((-0.965189056, -0.372172765)):
            Rectangle(CROQUIS14_W, CROQUIS14_H)
    extrude(amount=CORTAR_EXTRUIR10_DEPTH + CORTAR_EXTRUIR10_DEPTH_BACK, mode=Mode.SUBTRACT)

    # Croquis22 → Saliente-Extruir9 (add)
    with BuildSketch(Plane.XY.offset(3)):
        with Locations((82, -2.11721377)):
            Rectangle(CROQUIS22_W, CROQUIS22_H)
        with Locations((-82, -2.11721377)):
            Rectangle(CROQUIS22_W, CROQUIS22_H)
    extrude(amount=-SALIENTE_EXTRUIR9_DEPTH)

    # Croquis23 → Cortar-Extruir11 (cut)
    with BuildSketch(Plane.XY.offset(3)):
        with Locations((-59.930816368, 11.591675682)):
            Rectangle(CROQUIS23_W, CROQUIS23_H)
    extrude(amount=-CORTAR_EXTRUIR11_DEPTH, mode=Mode.SUBTRACT)

    # Croquis15 → Saliente-Extruir4 (add)
    with BuildSketch(Plane(origin=(71.5, 0, 0), x_dir=(0, 0, -1), z_dir=(1, 0, 0)).offset(SALIENTE_EXTRUIR4_START)):
        Polygon((-3, -25.75), (-28.175174424, 1.25), (-3, 1.25), align=None)
    extrude(amount=SALIENTE_EXTRUIR4_DEPTH)

    # Croquis16 → Saliente-Extruir5 (add)
    with BuildSketch(Plane.ZY.offset(71.5).offset(SALIENTE_EXTRUIR5_START)):
        Polygon((3, 1.25), (28.175174424, 1.25), (3, -25.75), align=None)
    extrude(amount=SALIENTE_EXTRUIR5_DEPTH)

    # Croquis17 → Saliente-Extruir6 (add)
    with BuildSketch(Plane.ZY.offset(71.5).offset(SALIENTE_EXTRUIR6_START)):
        Polygon((3, -22.015572461), (24.6931424, 1.25), (28.175174424, 1.25), (3, -25.75), align=None)
    extrude(amount=SALIENTE_EXTRUIR6_DEPTH)

    # Croquis18 → Saliente-Extruir7 (add)
    with BuildSketch(Plane.XY.offset(3)):
        with Locations((0, -33.75)):
            Circle(CROQUIS18_R)
    extrude(amount=-SALIENTE_EXTRUIR7_DEPTH)

    # Redondeo1
    # the kernel refuses this fillet: 10 mm, written as the material it adds along each edge
    with BuildSketch(Plane(origin=(-71.5, -25.75, 3), x_dir=(0, 0.731390625538099, 0.6819587618580675), z_dir=(1, 0, 0))) as redondeo1_piece_1:
        with BuildLine():
            CenterArc((REDONDEO1_R * 0.393879204265, REDONDEO1_R), REDONDEO1_R, 227.003102128, 42.996897872)
            Line((-REDONDEO1_R * 0.288079557594, REDONDEO1_R * 0.268609374462), (0, 0))
            Line((0, 0), (REDONDEO1_R * 0.393879204265, 0))
        make_face()
    extrude(amount=143)

    # Croquis19 → Saliente-Extruir8 (add)
    # profile 1 of 2: a face of its own
    with BuildSketch(Plane.XY.offset(3)):
        with Locations((-79.5, -12.1)):
            Circle(CROQUIS19_R)
        with Locations((-79.5, -12.1)):
            Circle(CROQUIS19_R_2, mode=Mode.SUBTRACT)
    # profile 2 of 2: a face of its own
    with BuildSketch(Plane.XY.offset(3)):
        with Locations((79.5, -12.1)):
            Circle(CROQUIS19_R)
        with Locations((79.5, -12.1)):
            Circle(CROQUIS19_R_3, mode=Mode.SUBTRACT)
    extrude(amount=-SALIENTE_EXTRUIR8_DEPTH)


solid = part.part
